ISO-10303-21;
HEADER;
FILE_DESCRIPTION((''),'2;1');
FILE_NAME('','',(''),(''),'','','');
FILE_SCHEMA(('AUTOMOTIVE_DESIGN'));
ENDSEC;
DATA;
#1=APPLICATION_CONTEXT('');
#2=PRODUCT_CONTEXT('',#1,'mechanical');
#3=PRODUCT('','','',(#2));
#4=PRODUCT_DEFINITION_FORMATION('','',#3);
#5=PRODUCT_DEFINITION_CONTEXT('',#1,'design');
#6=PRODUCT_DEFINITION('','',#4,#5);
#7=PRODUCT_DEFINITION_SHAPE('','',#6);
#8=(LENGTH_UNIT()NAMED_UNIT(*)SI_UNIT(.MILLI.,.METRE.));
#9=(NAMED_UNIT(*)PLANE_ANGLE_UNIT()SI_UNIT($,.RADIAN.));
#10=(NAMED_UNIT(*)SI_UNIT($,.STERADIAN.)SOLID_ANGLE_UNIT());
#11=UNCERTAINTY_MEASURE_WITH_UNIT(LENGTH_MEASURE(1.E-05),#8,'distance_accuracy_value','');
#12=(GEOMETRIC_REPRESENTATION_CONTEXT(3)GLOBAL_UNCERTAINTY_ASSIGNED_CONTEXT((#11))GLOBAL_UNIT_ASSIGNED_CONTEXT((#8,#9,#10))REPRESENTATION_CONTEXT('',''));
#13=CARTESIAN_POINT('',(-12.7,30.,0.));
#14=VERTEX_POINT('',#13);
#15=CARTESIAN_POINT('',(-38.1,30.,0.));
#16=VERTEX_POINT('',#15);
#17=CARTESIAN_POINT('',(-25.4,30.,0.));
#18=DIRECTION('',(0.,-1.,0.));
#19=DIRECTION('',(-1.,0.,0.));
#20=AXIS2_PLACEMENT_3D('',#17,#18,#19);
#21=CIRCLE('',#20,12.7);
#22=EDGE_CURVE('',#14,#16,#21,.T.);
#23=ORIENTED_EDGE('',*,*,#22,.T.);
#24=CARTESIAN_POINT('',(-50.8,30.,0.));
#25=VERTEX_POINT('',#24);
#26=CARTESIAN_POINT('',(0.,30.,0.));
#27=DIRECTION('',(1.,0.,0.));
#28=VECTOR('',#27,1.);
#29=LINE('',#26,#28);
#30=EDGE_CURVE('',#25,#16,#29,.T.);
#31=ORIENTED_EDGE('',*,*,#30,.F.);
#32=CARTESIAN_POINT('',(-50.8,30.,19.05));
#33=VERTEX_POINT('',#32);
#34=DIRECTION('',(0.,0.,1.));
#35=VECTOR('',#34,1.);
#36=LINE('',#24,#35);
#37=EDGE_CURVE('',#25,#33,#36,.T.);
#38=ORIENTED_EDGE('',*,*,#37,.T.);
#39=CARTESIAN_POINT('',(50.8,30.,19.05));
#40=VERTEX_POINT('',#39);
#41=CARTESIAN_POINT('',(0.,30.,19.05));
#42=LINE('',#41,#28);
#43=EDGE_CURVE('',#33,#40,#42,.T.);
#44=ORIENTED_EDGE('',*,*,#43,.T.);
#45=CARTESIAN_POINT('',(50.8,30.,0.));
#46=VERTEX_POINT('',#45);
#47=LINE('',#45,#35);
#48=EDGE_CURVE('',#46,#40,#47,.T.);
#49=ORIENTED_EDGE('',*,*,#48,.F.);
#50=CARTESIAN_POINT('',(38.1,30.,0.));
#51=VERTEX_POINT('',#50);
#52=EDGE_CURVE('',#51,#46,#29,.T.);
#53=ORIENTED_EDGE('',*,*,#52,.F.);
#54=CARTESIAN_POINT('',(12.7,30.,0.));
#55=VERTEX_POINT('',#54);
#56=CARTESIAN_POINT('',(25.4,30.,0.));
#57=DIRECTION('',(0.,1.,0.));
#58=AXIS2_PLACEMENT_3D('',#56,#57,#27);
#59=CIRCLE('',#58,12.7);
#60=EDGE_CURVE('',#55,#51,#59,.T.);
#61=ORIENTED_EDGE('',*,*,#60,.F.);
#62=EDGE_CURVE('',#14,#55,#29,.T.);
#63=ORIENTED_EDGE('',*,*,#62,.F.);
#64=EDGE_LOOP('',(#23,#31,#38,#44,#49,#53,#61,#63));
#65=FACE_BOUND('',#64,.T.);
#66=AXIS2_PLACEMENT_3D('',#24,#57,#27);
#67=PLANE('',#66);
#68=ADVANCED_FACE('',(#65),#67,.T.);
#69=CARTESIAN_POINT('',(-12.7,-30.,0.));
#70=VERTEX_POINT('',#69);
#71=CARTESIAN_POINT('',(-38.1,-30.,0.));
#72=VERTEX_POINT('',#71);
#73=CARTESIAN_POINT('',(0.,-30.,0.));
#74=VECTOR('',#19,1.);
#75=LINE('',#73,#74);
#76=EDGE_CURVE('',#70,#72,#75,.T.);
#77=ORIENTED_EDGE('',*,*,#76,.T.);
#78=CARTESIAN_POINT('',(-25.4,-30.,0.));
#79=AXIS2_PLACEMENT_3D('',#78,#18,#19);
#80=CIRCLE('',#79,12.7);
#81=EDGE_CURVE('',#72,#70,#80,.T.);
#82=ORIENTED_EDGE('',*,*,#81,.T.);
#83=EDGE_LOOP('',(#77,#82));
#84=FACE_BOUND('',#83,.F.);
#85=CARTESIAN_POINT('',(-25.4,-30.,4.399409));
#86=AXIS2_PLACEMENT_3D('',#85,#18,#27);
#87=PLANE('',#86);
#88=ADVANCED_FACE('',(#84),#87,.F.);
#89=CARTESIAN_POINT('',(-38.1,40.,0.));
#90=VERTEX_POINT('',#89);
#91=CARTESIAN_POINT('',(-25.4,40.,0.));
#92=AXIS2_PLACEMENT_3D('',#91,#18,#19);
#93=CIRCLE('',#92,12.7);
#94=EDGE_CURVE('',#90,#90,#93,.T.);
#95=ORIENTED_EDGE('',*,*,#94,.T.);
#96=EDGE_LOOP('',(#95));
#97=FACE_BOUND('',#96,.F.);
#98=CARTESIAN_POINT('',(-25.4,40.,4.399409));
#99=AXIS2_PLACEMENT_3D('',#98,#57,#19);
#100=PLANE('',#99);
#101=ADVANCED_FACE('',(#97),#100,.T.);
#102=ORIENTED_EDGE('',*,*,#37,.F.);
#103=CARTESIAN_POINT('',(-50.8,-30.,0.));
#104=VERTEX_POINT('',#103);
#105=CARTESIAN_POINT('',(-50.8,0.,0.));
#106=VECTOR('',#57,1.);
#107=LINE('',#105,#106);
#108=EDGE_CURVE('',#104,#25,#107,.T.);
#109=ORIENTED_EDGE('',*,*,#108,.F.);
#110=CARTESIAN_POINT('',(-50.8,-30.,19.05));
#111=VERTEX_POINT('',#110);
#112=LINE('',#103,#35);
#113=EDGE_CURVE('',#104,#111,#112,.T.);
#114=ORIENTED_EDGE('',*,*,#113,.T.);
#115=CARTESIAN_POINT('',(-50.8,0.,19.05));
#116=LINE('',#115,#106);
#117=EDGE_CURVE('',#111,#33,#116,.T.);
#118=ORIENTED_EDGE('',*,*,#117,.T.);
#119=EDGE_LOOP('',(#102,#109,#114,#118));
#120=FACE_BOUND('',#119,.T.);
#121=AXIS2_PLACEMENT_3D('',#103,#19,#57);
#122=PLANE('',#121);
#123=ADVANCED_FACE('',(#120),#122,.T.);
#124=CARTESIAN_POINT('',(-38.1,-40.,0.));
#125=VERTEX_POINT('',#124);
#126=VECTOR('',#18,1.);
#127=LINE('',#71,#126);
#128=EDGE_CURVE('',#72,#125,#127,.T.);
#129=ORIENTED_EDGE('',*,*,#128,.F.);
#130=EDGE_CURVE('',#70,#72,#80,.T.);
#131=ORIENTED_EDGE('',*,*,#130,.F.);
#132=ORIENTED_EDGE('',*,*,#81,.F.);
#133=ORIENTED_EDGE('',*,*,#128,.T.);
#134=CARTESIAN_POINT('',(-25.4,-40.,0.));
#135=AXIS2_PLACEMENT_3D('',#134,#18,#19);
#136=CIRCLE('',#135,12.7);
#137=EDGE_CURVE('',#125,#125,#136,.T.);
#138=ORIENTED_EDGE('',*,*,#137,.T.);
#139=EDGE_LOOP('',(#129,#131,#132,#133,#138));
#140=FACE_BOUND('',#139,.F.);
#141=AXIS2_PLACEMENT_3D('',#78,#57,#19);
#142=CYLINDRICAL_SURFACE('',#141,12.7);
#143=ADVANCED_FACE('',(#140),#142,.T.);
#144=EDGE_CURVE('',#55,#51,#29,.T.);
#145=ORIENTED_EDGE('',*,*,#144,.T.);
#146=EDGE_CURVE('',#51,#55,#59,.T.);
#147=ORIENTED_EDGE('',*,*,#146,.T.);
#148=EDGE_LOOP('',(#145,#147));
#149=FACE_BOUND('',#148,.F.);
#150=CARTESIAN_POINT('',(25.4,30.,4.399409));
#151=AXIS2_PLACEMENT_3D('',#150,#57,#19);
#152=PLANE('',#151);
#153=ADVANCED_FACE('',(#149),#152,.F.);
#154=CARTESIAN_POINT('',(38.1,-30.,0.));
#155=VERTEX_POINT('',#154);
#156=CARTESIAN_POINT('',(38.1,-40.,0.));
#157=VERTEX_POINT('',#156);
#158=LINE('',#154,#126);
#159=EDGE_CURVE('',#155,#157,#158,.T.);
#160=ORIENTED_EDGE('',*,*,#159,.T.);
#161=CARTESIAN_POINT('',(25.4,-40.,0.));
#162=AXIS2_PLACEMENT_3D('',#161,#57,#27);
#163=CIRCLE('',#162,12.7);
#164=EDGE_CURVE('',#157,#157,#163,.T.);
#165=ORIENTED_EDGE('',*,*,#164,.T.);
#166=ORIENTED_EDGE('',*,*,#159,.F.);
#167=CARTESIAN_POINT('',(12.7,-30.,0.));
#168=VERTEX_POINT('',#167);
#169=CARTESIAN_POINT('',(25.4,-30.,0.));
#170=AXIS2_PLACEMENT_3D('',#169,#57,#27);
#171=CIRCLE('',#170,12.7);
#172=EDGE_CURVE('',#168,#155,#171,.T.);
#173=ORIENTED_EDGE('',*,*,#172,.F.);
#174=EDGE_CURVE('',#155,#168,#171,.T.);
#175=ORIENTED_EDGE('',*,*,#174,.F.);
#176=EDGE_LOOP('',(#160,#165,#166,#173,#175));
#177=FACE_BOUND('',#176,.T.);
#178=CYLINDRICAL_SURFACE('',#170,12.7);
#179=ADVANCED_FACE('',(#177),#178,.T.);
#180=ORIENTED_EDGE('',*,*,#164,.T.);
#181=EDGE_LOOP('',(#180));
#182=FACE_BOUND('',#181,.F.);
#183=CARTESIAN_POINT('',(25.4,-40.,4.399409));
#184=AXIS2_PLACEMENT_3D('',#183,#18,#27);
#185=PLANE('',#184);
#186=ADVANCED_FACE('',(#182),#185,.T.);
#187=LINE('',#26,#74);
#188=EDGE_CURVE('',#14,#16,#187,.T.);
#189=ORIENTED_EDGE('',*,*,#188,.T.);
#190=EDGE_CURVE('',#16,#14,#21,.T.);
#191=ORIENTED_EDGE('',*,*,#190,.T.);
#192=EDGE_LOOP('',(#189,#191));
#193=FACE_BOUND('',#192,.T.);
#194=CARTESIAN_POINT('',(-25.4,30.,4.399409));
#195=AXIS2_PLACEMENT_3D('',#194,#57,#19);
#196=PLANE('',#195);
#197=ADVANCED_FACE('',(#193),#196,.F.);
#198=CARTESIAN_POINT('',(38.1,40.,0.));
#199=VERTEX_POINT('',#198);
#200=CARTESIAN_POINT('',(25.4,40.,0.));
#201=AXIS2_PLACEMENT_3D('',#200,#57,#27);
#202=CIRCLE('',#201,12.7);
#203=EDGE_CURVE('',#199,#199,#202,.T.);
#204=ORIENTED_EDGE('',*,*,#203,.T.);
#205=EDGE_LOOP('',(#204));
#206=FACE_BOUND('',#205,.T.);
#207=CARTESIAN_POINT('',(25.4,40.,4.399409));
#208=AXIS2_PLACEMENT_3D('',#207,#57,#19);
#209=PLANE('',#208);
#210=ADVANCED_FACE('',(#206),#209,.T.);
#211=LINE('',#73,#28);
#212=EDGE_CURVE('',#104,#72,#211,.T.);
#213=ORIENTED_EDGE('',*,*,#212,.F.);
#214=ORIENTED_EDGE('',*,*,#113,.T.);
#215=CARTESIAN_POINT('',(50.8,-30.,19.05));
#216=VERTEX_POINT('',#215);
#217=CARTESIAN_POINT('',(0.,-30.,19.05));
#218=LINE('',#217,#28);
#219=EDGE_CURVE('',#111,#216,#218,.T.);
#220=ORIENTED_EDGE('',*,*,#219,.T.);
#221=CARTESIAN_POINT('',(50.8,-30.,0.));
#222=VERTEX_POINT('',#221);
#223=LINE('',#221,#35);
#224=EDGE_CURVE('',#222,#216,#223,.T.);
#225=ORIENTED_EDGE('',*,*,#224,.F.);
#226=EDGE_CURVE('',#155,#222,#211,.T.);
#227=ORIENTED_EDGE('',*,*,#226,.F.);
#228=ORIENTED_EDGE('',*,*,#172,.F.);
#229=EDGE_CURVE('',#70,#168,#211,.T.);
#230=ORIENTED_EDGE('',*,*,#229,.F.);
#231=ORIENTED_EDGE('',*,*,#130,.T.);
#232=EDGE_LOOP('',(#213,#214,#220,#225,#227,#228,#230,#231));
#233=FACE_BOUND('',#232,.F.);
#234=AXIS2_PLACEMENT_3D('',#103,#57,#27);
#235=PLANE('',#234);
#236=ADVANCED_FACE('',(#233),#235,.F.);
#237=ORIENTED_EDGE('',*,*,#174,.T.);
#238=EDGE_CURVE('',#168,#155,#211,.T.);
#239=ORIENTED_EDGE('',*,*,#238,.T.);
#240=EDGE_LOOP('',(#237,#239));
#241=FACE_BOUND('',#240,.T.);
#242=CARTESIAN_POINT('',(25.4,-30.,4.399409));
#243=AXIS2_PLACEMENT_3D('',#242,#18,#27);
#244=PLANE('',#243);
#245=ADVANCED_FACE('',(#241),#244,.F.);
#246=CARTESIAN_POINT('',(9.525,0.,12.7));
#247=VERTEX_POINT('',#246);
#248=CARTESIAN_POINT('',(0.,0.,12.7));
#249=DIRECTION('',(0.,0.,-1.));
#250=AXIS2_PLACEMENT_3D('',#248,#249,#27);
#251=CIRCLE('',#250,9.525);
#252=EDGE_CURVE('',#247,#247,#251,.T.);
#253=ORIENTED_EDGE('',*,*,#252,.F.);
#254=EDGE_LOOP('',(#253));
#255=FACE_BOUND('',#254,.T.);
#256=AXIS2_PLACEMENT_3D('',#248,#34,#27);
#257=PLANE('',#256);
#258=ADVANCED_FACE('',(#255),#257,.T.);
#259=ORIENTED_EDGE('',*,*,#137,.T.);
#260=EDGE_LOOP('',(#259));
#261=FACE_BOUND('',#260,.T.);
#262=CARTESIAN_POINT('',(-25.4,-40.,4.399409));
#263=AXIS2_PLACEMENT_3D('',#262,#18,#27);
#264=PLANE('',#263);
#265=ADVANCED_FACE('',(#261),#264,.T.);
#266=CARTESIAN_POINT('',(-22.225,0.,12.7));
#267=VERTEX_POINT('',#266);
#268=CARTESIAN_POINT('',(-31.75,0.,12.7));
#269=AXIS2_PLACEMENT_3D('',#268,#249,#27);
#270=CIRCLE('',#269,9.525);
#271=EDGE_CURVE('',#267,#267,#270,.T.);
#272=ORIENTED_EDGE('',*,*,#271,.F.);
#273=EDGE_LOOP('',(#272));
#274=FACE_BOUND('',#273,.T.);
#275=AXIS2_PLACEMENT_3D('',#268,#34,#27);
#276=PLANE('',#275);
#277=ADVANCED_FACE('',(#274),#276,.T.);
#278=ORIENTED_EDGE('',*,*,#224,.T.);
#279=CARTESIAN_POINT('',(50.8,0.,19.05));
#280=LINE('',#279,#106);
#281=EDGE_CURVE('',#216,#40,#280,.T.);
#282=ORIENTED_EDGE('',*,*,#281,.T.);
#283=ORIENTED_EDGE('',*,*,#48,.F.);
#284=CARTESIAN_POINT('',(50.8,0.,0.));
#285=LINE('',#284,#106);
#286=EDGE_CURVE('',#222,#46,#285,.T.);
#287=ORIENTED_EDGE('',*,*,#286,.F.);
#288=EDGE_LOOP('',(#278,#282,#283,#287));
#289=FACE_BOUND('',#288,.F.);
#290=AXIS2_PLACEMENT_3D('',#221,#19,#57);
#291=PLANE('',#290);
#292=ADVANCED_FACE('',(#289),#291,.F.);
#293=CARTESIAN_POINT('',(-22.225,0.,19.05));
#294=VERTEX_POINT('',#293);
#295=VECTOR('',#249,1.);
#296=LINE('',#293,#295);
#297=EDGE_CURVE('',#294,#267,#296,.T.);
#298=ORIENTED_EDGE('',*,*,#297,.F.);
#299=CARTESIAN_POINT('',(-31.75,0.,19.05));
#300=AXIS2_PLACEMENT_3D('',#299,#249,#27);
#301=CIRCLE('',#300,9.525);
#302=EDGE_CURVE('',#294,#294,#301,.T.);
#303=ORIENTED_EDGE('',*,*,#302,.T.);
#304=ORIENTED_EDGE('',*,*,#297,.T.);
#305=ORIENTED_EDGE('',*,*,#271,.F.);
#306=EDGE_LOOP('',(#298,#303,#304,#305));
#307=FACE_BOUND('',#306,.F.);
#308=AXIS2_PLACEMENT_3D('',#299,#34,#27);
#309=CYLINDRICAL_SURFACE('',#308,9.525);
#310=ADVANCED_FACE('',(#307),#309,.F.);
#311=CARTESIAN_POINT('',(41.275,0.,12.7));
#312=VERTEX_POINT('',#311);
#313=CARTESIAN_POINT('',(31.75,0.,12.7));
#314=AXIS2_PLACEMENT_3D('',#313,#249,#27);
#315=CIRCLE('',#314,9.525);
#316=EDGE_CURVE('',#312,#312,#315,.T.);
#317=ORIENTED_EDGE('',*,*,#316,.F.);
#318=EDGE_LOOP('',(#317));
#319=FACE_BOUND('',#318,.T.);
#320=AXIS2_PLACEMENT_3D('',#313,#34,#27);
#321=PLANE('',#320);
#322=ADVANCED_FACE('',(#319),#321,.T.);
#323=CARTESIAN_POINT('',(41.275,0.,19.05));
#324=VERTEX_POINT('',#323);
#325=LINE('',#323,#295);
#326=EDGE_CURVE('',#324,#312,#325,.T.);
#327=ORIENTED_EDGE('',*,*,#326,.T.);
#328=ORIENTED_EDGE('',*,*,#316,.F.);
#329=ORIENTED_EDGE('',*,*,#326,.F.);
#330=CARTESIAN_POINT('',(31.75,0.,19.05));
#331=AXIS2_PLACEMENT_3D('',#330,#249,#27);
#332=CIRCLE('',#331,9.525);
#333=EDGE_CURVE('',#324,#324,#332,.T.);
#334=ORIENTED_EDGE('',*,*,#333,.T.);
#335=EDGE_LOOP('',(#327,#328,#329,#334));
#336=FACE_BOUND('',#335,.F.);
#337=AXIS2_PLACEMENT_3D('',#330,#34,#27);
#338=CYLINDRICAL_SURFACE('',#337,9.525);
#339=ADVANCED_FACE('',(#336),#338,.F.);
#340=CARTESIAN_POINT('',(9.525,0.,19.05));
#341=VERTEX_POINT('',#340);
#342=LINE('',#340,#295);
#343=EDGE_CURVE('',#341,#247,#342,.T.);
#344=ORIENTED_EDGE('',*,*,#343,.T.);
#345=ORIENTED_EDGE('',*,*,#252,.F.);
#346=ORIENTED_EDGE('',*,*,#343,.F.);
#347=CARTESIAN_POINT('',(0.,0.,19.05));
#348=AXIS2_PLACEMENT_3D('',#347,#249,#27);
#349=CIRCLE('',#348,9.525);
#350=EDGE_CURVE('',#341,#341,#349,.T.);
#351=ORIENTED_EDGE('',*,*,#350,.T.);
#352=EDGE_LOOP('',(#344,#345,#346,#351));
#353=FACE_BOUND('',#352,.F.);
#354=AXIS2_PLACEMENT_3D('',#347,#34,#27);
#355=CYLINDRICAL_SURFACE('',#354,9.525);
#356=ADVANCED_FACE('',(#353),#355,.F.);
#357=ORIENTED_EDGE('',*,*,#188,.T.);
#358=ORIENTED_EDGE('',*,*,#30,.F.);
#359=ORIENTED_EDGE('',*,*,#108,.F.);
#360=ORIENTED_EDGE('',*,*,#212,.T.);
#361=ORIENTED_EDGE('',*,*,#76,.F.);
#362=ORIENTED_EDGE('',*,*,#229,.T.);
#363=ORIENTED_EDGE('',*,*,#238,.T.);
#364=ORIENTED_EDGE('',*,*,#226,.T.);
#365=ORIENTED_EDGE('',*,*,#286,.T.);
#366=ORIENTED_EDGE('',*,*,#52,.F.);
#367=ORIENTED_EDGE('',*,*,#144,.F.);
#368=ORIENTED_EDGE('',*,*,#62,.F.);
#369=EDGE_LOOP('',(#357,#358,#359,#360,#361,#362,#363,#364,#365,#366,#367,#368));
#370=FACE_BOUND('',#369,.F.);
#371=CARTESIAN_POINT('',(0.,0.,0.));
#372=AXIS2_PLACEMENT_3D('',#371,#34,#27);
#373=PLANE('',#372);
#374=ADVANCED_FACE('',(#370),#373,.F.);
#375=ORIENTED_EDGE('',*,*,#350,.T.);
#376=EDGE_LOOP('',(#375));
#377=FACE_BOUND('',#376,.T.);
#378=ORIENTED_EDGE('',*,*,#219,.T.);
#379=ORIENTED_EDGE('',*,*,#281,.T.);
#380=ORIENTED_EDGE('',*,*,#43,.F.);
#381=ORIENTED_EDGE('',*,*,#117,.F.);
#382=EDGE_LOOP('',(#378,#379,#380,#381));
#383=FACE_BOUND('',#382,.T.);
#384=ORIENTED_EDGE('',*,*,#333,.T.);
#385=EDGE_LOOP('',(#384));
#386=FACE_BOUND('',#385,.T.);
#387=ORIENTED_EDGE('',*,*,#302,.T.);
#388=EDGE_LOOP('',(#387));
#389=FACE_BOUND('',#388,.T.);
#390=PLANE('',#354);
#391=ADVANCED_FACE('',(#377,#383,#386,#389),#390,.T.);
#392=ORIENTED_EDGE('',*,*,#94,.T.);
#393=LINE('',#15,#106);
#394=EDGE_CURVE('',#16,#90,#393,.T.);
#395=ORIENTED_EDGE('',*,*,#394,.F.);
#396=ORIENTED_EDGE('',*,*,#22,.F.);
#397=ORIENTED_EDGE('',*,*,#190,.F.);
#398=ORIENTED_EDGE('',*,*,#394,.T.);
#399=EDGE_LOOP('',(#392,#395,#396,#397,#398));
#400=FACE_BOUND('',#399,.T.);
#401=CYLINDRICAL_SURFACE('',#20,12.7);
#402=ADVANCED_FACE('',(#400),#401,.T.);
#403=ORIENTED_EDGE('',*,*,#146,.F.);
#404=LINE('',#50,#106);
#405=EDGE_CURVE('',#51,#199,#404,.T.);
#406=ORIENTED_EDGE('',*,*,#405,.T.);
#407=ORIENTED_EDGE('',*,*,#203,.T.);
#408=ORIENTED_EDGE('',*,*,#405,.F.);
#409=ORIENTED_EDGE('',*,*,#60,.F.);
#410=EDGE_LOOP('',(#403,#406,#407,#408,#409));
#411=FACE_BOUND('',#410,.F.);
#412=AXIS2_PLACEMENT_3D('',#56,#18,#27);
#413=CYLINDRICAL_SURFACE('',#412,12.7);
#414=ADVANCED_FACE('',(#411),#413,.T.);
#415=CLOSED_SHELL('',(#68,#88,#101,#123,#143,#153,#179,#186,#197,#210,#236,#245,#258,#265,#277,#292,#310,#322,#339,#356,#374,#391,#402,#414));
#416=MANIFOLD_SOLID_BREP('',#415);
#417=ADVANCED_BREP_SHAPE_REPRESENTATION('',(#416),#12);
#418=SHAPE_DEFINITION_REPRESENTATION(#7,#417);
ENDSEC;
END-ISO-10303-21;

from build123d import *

# Parameters (mm, degrees)
F0_W     = 101.6
F0_H     = 60
F1_DEPTH = 19.05
F2_R     = 9.525
F3_DEPTH = 6.35
F5_DEPTH = 10


# Not quite as in the source:
# - a length typed as a fraction of an inch, garbled in the dataset ("3 / 203.2 mm" for 3/8 in), is restored


with BuildPart() as f1:
    # F0 (on Top) → F1 (new body)
    with BuildSketch(Plane.XY):
        Rectangle(F0_W, F0_H)
    extrude(amount=F1_DEPTH)

    # F2 (on face) → F3 (cut)
    with BuildSketch(Plane.XY.offset(19.05)):
        Circle(F2_R)
        with Locations((31.75, 0)):
            Circle(F2_R)
        with Locations((-31.75, 0)):
            Circle(F2_R)
    extrude(amount=-F3_DEPTH, mode=Mode.SUBTRACT)

    # F4 (on face) → F5 (join)
    with BuildSketch(Plane(origin=(0, 30, 0), x_dir=(-1, 0, 0), z_dir=(0, 1, 0))):
        with BuildLine():
            ThreePointArc((-12.7, 0), (-25.4, 12.7), (-38.1, 0))
            Line((-38.1, 0), (-25.4, 0))
            Line((-25.4, 0), (-12.7, 0))
        make_face()
        with BuildLine():
            Line((-25.4, 0), (-38.1, 0))
            ThreePointArc((-38.1, 0), (-25.4, -12.7), (-12.7, 0))
            Line((-12.7, 0), (-25.4, 0))
        make_face()
    extrude(amount=F5_DEPTH)


with BuildPart() as f6_1:
    # F6: instance of F1
    add(f1.part.mirror(Plane.YZ))


with BuildPart() as f1_1:
    add(f1.part)

    add(f6_1.part)  # F7 merges F6_1
    # F7: F6_1, F1 across plane
    add(f6_1.part.mirror(Plane.XZ))
    add(f1.part.mirror(Plane.XZ))


solid = f1_1.part
